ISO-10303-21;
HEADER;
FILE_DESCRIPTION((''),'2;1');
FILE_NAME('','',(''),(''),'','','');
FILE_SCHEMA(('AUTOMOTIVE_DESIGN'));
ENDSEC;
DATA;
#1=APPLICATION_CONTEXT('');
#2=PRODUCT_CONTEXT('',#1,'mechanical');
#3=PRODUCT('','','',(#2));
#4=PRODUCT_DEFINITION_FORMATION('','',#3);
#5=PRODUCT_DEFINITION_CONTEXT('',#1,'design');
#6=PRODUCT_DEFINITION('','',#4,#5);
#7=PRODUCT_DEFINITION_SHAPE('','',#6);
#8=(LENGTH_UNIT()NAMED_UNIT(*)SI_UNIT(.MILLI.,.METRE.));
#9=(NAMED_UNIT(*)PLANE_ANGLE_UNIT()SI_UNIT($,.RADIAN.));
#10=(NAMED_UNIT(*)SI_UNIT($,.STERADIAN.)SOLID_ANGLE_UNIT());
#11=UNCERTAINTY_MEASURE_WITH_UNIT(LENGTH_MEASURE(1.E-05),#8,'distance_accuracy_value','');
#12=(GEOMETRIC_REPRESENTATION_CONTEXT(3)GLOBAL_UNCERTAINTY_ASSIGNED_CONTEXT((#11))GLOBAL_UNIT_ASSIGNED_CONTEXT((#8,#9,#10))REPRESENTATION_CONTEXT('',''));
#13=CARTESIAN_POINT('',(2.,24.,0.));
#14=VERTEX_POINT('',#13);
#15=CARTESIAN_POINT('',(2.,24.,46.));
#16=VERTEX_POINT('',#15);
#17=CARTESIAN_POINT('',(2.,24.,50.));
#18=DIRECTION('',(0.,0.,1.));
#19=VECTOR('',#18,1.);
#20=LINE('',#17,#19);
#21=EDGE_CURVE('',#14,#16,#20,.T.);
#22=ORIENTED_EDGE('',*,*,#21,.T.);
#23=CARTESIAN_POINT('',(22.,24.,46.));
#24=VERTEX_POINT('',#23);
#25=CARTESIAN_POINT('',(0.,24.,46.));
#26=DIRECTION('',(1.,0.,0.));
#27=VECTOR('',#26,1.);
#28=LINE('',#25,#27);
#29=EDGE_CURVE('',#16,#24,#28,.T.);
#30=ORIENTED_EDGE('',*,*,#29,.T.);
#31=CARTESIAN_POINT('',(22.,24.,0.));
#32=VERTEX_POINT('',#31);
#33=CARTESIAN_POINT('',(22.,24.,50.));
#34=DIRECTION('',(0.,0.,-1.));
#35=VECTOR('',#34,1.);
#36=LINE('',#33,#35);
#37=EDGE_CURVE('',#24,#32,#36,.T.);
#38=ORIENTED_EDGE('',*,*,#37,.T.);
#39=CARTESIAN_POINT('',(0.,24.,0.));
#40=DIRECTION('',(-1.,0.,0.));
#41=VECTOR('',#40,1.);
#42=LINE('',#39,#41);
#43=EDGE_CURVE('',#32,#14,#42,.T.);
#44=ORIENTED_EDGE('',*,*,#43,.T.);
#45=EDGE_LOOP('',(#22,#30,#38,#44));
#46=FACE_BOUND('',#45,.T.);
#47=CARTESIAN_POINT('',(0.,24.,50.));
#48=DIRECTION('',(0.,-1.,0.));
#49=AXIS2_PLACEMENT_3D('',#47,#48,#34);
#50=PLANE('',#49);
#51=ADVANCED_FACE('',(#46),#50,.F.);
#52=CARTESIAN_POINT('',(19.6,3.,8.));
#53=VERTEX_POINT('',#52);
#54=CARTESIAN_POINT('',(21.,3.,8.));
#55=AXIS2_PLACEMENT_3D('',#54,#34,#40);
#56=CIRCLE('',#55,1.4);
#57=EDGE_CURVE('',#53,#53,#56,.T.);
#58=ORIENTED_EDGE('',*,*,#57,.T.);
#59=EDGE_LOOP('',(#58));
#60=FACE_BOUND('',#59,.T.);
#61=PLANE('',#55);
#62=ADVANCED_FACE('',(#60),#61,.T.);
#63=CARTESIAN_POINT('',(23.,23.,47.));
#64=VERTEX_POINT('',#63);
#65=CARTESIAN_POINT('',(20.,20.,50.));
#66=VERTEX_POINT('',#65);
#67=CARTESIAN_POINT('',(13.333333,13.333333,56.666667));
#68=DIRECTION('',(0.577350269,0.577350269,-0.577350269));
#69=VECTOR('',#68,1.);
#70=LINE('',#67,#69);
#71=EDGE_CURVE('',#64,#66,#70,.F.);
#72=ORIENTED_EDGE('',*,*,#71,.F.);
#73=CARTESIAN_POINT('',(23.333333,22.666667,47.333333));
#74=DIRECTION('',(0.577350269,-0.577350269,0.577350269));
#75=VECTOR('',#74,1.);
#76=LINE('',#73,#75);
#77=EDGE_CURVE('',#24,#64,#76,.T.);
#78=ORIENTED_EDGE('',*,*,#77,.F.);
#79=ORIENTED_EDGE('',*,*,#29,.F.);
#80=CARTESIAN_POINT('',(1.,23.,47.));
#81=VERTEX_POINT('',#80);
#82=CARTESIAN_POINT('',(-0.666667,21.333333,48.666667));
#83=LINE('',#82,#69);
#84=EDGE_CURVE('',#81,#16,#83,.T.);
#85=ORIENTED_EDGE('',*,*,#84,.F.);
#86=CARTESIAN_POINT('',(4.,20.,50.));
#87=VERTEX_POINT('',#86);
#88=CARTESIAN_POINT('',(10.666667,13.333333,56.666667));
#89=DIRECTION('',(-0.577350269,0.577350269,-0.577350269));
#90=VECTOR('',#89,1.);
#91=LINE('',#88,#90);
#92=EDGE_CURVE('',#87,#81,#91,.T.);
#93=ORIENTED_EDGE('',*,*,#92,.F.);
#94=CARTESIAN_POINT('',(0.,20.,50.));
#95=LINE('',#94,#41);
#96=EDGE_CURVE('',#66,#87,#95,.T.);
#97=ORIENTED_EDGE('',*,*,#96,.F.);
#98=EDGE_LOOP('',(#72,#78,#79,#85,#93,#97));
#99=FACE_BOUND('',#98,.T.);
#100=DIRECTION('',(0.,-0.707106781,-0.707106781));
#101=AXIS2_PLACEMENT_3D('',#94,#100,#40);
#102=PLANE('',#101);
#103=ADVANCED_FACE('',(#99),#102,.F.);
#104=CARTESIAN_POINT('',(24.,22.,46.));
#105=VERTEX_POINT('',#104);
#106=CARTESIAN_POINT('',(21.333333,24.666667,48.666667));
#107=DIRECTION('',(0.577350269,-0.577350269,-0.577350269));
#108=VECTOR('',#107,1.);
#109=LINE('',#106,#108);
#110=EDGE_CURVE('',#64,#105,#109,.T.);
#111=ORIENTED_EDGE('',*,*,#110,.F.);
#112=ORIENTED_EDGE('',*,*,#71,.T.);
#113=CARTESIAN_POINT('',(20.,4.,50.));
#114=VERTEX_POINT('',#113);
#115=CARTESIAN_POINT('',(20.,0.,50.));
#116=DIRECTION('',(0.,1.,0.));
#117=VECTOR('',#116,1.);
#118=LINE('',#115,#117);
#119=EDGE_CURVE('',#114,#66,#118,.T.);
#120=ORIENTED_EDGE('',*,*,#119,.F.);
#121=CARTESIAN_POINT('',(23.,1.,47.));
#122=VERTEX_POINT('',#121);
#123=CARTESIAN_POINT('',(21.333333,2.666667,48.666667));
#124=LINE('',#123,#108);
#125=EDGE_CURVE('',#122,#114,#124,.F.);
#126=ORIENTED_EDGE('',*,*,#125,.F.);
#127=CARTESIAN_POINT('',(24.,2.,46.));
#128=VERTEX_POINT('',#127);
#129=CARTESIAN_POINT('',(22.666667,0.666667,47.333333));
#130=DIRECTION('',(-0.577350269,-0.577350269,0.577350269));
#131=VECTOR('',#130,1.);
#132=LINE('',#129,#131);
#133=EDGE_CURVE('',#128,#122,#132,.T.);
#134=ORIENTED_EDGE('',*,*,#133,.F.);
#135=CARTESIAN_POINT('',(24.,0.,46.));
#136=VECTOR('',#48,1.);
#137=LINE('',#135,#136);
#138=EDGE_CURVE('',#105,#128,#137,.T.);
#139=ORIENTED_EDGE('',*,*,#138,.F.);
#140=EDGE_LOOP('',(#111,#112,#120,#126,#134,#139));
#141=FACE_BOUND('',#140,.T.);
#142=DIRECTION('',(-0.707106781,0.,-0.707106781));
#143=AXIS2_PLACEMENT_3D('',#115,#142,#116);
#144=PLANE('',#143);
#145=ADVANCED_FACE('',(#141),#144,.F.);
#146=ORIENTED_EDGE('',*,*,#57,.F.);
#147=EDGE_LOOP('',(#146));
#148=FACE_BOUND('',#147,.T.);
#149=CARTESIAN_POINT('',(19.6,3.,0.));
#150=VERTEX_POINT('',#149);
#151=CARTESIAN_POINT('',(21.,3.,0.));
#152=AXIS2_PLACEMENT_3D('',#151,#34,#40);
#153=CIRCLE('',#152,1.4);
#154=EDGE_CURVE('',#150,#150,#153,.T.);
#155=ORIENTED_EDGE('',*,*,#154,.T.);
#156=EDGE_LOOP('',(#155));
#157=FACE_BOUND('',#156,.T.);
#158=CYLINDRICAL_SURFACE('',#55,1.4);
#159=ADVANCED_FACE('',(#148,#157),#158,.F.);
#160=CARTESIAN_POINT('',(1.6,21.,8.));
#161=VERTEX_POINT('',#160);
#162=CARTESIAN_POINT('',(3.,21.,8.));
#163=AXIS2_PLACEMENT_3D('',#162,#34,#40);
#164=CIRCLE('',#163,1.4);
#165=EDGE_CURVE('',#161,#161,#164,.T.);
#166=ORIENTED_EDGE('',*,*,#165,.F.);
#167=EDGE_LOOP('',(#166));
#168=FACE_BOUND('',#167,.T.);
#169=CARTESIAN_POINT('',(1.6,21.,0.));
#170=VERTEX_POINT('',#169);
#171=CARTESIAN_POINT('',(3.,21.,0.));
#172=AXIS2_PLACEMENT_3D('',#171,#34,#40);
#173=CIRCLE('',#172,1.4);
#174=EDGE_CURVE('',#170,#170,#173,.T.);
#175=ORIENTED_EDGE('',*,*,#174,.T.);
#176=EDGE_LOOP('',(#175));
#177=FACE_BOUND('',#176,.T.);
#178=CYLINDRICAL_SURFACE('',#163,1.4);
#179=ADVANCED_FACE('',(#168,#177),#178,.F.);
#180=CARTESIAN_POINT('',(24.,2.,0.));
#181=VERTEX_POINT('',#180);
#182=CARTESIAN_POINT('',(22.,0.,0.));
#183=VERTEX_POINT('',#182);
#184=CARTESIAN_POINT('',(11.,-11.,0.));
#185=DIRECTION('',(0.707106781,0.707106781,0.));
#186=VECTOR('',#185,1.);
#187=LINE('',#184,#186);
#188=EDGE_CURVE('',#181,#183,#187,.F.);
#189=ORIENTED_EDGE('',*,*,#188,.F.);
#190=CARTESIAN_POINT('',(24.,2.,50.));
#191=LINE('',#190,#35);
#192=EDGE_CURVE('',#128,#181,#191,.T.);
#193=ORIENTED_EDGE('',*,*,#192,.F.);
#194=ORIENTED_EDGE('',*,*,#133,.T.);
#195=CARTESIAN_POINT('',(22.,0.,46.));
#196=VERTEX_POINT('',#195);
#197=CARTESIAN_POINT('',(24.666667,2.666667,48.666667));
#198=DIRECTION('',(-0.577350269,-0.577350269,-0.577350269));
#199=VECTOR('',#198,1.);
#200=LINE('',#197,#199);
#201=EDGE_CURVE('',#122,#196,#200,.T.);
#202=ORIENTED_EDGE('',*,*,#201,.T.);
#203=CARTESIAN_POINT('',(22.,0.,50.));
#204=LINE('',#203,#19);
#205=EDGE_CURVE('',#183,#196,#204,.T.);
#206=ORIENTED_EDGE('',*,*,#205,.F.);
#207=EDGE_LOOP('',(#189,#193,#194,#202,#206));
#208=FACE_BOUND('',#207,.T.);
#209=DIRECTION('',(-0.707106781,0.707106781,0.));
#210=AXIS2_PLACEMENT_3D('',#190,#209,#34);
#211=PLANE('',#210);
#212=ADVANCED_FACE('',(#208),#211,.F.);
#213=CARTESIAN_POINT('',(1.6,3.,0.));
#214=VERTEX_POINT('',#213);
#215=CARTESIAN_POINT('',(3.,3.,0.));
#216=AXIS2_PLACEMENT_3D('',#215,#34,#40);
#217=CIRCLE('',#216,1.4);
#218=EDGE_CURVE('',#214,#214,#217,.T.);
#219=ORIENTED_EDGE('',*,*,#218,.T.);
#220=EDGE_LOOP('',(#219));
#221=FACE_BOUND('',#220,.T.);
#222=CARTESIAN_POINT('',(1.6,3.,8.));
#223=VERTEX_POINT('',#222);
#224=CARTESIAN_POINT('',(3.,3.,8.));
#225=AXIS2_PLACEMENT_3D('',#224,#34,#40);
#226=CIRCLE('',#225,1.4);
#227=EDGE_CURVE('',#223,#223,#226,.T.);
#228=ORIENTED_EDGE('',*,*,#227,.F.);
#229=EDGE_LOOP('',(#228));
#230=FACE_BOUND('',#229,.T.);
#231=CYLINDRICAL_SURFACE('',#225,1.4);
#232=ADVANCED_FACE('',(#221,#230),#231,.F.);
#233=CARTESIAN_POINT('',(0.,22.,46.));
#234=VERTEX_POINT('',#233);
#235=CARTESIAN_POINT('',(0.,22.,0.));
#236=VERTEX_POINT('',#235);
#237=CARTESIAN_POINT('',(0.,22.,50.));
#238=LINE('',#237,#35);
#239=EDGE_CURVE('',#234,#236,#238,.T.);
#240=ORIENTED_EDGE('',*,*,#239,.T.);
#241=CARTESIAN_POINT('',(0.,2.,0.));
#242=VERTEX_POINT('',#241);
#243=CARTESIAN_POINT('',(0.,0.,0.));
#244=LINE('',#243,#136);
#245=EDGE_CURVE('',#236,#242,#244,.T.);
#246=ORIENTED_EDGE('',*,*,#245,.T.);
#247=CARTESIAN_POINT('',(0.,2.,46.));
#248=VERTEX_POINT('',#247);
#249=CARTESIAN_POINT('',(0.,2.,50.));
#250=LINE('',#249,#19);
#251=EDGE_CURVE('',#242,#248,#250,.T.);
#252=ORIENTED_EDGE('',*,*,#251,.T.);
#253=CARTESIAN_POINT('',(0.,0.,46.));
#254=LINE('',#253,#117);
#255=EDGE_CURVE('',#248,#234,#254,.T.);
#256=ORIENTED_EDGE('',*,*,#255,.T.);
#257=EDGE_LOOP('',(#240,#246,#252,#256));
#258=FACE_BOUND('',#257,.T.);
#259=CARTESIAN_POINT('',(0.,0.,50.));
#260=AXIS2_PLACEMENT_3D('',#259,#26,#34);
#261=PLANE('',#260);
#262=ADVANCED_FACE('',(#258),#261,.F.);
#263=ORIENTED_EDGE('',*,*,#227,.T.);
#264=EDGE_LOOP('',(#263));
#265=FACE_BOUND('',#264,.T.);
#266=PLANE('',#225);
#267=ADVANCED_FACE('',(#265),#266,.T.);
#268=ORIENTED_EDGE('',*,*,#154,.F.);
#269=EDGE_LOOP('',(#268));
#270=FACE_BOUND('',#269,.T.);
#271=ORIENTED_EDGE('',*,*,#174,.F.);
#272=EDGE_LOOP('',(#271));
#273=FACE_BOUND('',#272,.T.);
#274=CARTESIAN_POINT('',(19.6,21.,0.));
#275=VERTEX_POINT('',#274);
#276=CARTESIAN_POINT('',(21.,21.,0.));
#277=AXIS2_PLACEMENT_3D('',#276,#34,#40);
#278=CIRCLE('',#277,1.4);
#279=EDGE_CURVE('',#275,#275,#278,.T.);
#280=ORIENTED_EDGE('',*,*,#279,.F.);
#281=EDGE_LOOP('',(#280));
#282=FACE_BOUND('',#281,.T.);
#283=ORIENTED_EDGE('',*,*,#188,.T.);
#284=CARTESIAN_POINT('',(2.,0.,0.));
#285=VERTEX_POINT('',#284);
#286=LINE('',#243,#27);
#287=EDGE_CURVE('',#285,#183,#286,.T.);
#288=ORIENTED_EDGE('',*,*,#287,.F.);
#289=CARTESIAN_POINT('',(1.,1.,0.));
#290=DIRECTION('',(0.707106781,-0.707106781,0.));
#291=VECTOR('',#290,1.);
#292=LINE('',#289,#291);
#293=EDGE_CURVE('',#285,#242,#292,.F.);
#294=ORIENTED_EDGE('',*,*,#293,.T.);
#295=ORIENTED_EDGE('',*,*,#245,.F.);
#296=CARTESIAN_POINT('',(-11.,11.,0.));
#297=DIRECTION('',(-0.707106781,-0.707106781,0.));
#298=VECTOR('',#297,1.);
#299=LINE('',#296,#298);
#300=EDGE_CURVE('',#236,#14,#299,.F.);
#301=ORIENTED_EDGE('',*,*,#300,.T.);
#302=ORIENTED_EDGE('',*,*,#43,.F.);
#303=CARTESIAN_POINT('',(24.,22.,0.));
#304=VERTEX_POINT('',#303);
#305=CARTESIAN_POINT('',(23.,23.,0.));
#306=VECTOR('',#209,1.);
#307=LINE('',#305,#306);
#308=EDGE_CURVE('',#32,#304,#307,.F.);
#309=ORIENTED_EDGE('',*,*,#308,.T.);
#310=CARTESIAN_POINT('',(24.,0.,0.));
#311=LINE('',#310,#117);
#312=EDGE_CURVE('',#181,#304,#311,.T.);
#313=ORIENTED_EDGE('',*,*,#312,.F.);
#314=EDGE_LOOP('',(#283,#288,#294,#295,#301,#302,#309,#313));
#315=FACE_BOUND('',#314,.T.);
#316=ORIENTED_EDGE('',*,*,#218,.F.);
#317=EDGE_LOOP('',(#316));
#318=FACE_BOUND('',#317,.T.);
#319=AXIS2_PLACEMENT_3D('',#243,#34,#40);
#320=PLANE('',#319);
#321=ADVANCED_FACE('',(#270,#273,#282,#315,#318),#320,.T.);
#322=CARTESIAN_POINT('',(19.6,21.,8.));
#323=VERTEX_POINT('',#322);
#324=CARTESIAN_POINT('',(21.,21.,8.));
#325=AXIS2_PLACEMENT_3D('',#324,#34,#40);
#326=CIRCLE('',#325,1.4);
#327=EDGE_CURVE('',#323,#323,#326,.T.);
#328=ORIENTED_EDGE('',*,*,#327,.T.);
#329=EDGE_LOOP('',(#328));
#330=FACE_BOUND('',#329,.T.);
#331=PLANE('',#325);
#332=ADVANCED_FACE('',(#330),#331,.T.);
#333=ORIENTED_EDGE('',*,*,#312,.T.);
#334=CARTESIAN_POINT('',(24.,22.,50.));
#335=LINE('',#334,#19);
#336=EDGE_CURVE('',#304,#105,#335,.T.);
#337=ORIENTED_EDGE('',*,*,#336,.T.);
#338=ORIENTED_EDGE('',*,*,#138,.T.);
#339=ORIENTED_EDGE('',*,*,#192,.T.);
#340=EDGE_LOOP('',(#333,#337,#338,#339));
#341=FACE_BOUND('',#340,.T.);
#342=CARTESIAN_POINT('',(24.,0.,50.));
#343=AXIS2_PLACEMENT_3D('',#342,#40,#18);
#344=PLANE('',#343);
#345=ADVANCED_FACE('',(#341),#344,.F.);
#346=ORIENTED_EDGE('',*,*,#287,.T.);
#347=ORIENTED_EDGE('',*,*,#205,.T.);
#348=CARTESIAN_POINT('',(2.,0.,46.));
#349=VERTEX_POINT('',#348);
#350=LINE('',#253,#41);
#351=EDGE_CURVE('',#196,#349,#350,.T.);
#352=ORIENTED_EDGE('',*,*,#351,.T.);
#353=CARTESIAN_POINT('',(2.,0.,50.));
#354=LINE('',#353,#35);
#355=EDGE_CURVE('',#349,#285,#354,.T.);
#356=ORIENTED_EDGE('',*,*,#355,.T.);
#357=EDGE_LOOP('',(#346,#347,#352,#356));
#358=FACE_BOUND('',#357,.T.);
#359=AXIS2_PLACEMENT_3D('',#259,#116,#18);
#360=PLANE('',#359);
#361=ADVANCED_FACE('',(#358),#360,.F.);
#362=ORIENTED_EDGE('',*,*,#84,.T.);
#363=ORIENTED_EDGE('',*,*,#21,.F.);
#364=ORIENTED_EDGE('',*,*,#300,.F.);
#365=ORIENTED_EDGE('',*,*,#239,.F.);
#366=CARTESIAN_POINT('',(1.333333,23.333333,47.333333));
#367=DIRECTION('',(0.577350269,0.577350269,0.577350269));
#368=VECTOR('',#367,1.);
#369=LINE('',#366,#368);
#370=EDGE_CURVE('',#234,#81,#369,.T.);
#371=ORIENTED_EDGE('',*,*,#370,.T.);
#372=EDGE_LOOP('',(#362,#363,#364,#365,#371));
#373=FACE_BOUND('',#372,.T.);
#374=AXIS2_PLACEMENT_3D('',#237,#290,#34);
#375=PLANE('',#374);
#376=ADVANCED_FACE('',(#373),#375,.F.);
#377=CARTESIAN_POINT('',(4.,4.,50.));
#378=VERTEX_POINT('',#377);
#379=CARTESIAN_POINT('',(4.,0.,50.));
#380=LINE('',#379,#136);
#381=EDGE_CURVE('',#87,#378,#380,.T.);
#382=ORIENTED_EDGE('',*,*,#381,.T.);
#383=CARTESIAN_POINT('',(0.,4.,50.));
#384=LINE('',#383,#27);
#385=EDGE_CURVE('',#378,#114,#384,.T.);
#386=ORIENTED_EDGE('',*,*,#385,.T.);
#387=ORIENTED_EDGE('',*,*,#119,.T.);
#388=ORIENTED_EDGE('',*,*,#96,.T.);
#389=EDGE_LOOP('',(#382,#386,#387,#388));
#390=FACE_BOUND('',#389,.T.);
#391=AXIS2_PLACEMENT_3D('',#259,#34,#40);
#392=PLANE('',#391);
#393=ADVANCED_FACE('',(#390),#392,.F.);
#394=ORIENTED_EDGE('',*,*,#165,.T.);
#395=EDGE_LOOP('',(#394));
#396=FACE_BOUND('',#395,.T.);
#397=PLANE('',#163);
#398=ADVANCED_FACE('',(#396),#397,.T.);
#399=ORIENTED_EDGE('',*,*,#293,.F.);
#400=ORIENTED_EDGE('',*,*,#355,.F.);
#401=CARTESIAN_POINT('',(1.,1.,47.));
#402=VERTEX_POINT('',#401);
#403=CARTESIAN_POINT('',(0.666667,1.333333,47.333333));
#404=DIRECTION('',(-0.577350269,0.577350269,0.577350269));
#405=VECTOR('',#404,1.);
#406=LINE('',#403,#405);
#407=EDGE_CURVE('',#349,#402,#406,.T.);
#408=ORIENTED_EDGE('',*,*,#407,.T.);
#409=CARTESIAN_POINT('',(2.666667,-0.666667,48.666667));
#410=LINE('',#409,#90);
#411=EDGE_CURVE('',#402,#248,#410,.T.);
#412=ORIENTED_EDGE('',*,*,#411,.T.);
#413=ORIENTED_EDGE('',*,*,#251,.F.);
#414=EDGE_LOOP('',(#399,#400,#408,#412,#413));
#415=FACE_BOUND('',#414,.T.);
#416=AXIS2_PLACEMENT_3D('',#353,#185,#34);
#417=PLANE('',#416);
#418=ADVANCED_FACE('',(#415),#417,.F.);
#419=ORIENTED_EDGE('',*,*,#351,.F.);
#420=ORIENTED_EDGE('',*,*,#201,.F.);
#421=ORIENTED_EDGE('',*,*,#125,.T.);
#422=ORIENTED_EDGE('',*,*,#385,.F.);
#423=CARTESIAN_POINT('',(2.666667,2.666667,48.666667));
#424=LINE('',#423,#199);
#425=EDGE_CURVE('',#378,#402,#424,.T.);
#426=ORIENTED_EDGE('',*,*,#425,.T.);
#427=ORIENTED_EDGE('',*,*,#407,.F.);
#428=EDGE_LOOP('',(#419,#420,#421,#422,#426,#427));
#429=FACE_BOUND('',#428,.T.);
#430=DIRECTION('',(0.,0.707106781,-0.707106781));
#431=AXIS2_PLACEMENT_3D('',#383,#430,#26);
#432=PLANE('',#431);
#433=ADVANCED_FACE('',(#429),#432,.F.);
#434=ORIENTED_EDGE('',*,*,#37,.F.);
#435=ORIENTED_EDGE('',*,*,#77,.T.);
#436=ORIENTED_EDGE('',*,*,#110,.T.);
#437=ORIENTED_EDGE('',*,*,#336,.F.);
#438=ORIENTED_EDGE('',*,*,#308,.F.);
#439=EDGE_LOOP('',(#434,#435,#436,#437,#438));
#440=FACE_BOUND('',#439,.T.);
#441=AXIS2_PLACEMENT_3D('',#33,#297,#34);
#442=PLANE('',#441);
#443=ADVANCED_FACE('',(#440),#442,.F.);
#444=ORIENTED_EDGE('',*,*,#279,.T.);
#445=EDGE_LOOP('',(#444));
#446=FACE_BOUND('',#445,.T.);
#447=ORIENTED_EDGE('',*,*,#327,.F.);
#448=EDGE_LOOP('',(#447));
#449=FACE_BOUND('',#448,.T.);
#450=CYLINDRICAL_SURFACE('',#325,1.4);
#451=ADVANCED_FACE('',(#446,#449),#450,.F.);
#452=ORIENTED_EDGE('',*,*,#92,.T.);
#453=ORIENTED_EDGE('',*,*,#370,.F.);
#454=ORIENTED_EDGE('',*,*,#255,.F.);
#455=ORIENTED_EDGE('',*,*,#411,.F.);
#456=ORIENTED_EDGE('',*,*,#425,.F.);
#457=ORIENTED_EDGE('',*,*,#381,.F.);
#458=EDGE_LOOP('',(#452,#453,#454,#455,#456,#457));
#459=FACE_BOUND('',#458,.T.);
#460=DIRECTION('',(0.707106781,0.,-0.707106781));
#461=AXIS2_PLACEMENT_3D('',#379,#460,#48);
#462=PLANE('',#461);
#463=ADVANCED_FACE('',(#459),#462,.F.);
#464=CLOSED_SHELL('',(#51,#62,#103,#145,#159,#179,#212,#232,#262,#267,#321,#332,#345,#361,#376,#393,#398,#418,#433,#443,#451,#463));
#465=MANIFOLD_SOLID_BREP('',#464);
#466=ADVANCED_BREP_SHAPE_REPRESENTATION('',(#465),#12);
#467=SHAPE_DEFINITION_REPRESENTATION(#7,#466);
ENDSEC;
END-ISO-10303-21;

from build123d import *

# Parameters (mm, degrees)
SKETCH2_W           = 24
SKETCH2_H           = 24
BOSS_EXTRUDE2_DEPTH = 50
SKETCH4_R           = 1.4
CUT_EXTRUDE1_DEPTH  = 8
CHAMFER1_SIZE       = 2
CHAMFER2_SIZE       = 4


with BuildPart() as part:
    # Sketch2 → Boss-Extrude2 (new body)
    with BuildSketch(Plane.XY):
        with Locations((12, 12)):
            Rectangle(SKETCH2_W, SKETCH2_H)
    extrude(amount=BOSS_EXTRUDE2_DEPTH)

    # Sketch4 → Cut-Extrude1 (cut)
    with BuildSketch(Plane(origin=(0, 0, 0), x_dir=(-1, 0, 0), z_dir=(0, 0, -1))):
        with Locations((-21, 21)):
            Circle(SKETCH4_R)
        with Locations((-21, 3)):
            Circle(SKETCH4_R)
        with Locations((-3, 3)):
            Circle(SKETCH4_R)
        with Locations((-3, 21)):
            Circle(SKETCH4_R)
    extrude(amount=-CUT_EXTRUDE1_DEPTH, mode=Mode.SUBTRACT)

    # Chamfer1
    chamfer1_edges = [part.edges().sort_by_distance(p)[0] for p in [
        (0, 24, 25),
        (24, 24, 25),
        (24, 0, 25),
        (0, 0, 25),
    ]]
    chamfer(chamfer1_edges, length=CHAMFER1_SIZE)

    # Chamfer2
    # the kernel refuses this chamfer: 4 mm, written as the material it takes off along each edge
    with BuildSketch(Plane(origin=(-8.286731952, 0, 50), x_dir=(0, -0.02749587661058639, -0.9996219169112968), z_dir=(1, 0, 0))) as chamfer2_piece_1:
        Polygon((CHAMFER2_SIZE * 0.999621916911, CHAMFER2_SIZE * 0.0274958766106), (-CHAMFER2_SIZE * 0.0274958766106, CHAMFER2_SIZE * 0.999621916911), (0, 0), align=None)
    extrude(amount=40.573463904, mode=Mode.SUBTRACT)
    with BuildSketch(Plane(origin=(24, -8.286731952, 50), x_dir=(-0.9996219169112968, 0, 0.027495876610585623), z_dir=(0, 1, 0)), Plane(origin=(32.286731952, 24, 50), x_dir=(0, -0.9996219169112968, 0.027495876610585623), z_dir=(-1, 0, 0)), Plane(origin=(0, 32.286731952, 50), x_dir=(0.9996219169112968, 0, 0.02749587661058563), z_dir=(0, -1, 0))) as chamfer2_piece_2:
        Polygon((CHAMFER2_SIZE * 0.999621916911, -CHAMFER2_SIZE * 0.0274958766106), (-CHAMFER2_SIZE * 0.0274958766106, -CHAMFER2_SIZE * 0.999621916911), (0, 0), align=None)
    extrude(amount=40.573463904, mode=Mode.SUBTRACT)


solid = part.part
